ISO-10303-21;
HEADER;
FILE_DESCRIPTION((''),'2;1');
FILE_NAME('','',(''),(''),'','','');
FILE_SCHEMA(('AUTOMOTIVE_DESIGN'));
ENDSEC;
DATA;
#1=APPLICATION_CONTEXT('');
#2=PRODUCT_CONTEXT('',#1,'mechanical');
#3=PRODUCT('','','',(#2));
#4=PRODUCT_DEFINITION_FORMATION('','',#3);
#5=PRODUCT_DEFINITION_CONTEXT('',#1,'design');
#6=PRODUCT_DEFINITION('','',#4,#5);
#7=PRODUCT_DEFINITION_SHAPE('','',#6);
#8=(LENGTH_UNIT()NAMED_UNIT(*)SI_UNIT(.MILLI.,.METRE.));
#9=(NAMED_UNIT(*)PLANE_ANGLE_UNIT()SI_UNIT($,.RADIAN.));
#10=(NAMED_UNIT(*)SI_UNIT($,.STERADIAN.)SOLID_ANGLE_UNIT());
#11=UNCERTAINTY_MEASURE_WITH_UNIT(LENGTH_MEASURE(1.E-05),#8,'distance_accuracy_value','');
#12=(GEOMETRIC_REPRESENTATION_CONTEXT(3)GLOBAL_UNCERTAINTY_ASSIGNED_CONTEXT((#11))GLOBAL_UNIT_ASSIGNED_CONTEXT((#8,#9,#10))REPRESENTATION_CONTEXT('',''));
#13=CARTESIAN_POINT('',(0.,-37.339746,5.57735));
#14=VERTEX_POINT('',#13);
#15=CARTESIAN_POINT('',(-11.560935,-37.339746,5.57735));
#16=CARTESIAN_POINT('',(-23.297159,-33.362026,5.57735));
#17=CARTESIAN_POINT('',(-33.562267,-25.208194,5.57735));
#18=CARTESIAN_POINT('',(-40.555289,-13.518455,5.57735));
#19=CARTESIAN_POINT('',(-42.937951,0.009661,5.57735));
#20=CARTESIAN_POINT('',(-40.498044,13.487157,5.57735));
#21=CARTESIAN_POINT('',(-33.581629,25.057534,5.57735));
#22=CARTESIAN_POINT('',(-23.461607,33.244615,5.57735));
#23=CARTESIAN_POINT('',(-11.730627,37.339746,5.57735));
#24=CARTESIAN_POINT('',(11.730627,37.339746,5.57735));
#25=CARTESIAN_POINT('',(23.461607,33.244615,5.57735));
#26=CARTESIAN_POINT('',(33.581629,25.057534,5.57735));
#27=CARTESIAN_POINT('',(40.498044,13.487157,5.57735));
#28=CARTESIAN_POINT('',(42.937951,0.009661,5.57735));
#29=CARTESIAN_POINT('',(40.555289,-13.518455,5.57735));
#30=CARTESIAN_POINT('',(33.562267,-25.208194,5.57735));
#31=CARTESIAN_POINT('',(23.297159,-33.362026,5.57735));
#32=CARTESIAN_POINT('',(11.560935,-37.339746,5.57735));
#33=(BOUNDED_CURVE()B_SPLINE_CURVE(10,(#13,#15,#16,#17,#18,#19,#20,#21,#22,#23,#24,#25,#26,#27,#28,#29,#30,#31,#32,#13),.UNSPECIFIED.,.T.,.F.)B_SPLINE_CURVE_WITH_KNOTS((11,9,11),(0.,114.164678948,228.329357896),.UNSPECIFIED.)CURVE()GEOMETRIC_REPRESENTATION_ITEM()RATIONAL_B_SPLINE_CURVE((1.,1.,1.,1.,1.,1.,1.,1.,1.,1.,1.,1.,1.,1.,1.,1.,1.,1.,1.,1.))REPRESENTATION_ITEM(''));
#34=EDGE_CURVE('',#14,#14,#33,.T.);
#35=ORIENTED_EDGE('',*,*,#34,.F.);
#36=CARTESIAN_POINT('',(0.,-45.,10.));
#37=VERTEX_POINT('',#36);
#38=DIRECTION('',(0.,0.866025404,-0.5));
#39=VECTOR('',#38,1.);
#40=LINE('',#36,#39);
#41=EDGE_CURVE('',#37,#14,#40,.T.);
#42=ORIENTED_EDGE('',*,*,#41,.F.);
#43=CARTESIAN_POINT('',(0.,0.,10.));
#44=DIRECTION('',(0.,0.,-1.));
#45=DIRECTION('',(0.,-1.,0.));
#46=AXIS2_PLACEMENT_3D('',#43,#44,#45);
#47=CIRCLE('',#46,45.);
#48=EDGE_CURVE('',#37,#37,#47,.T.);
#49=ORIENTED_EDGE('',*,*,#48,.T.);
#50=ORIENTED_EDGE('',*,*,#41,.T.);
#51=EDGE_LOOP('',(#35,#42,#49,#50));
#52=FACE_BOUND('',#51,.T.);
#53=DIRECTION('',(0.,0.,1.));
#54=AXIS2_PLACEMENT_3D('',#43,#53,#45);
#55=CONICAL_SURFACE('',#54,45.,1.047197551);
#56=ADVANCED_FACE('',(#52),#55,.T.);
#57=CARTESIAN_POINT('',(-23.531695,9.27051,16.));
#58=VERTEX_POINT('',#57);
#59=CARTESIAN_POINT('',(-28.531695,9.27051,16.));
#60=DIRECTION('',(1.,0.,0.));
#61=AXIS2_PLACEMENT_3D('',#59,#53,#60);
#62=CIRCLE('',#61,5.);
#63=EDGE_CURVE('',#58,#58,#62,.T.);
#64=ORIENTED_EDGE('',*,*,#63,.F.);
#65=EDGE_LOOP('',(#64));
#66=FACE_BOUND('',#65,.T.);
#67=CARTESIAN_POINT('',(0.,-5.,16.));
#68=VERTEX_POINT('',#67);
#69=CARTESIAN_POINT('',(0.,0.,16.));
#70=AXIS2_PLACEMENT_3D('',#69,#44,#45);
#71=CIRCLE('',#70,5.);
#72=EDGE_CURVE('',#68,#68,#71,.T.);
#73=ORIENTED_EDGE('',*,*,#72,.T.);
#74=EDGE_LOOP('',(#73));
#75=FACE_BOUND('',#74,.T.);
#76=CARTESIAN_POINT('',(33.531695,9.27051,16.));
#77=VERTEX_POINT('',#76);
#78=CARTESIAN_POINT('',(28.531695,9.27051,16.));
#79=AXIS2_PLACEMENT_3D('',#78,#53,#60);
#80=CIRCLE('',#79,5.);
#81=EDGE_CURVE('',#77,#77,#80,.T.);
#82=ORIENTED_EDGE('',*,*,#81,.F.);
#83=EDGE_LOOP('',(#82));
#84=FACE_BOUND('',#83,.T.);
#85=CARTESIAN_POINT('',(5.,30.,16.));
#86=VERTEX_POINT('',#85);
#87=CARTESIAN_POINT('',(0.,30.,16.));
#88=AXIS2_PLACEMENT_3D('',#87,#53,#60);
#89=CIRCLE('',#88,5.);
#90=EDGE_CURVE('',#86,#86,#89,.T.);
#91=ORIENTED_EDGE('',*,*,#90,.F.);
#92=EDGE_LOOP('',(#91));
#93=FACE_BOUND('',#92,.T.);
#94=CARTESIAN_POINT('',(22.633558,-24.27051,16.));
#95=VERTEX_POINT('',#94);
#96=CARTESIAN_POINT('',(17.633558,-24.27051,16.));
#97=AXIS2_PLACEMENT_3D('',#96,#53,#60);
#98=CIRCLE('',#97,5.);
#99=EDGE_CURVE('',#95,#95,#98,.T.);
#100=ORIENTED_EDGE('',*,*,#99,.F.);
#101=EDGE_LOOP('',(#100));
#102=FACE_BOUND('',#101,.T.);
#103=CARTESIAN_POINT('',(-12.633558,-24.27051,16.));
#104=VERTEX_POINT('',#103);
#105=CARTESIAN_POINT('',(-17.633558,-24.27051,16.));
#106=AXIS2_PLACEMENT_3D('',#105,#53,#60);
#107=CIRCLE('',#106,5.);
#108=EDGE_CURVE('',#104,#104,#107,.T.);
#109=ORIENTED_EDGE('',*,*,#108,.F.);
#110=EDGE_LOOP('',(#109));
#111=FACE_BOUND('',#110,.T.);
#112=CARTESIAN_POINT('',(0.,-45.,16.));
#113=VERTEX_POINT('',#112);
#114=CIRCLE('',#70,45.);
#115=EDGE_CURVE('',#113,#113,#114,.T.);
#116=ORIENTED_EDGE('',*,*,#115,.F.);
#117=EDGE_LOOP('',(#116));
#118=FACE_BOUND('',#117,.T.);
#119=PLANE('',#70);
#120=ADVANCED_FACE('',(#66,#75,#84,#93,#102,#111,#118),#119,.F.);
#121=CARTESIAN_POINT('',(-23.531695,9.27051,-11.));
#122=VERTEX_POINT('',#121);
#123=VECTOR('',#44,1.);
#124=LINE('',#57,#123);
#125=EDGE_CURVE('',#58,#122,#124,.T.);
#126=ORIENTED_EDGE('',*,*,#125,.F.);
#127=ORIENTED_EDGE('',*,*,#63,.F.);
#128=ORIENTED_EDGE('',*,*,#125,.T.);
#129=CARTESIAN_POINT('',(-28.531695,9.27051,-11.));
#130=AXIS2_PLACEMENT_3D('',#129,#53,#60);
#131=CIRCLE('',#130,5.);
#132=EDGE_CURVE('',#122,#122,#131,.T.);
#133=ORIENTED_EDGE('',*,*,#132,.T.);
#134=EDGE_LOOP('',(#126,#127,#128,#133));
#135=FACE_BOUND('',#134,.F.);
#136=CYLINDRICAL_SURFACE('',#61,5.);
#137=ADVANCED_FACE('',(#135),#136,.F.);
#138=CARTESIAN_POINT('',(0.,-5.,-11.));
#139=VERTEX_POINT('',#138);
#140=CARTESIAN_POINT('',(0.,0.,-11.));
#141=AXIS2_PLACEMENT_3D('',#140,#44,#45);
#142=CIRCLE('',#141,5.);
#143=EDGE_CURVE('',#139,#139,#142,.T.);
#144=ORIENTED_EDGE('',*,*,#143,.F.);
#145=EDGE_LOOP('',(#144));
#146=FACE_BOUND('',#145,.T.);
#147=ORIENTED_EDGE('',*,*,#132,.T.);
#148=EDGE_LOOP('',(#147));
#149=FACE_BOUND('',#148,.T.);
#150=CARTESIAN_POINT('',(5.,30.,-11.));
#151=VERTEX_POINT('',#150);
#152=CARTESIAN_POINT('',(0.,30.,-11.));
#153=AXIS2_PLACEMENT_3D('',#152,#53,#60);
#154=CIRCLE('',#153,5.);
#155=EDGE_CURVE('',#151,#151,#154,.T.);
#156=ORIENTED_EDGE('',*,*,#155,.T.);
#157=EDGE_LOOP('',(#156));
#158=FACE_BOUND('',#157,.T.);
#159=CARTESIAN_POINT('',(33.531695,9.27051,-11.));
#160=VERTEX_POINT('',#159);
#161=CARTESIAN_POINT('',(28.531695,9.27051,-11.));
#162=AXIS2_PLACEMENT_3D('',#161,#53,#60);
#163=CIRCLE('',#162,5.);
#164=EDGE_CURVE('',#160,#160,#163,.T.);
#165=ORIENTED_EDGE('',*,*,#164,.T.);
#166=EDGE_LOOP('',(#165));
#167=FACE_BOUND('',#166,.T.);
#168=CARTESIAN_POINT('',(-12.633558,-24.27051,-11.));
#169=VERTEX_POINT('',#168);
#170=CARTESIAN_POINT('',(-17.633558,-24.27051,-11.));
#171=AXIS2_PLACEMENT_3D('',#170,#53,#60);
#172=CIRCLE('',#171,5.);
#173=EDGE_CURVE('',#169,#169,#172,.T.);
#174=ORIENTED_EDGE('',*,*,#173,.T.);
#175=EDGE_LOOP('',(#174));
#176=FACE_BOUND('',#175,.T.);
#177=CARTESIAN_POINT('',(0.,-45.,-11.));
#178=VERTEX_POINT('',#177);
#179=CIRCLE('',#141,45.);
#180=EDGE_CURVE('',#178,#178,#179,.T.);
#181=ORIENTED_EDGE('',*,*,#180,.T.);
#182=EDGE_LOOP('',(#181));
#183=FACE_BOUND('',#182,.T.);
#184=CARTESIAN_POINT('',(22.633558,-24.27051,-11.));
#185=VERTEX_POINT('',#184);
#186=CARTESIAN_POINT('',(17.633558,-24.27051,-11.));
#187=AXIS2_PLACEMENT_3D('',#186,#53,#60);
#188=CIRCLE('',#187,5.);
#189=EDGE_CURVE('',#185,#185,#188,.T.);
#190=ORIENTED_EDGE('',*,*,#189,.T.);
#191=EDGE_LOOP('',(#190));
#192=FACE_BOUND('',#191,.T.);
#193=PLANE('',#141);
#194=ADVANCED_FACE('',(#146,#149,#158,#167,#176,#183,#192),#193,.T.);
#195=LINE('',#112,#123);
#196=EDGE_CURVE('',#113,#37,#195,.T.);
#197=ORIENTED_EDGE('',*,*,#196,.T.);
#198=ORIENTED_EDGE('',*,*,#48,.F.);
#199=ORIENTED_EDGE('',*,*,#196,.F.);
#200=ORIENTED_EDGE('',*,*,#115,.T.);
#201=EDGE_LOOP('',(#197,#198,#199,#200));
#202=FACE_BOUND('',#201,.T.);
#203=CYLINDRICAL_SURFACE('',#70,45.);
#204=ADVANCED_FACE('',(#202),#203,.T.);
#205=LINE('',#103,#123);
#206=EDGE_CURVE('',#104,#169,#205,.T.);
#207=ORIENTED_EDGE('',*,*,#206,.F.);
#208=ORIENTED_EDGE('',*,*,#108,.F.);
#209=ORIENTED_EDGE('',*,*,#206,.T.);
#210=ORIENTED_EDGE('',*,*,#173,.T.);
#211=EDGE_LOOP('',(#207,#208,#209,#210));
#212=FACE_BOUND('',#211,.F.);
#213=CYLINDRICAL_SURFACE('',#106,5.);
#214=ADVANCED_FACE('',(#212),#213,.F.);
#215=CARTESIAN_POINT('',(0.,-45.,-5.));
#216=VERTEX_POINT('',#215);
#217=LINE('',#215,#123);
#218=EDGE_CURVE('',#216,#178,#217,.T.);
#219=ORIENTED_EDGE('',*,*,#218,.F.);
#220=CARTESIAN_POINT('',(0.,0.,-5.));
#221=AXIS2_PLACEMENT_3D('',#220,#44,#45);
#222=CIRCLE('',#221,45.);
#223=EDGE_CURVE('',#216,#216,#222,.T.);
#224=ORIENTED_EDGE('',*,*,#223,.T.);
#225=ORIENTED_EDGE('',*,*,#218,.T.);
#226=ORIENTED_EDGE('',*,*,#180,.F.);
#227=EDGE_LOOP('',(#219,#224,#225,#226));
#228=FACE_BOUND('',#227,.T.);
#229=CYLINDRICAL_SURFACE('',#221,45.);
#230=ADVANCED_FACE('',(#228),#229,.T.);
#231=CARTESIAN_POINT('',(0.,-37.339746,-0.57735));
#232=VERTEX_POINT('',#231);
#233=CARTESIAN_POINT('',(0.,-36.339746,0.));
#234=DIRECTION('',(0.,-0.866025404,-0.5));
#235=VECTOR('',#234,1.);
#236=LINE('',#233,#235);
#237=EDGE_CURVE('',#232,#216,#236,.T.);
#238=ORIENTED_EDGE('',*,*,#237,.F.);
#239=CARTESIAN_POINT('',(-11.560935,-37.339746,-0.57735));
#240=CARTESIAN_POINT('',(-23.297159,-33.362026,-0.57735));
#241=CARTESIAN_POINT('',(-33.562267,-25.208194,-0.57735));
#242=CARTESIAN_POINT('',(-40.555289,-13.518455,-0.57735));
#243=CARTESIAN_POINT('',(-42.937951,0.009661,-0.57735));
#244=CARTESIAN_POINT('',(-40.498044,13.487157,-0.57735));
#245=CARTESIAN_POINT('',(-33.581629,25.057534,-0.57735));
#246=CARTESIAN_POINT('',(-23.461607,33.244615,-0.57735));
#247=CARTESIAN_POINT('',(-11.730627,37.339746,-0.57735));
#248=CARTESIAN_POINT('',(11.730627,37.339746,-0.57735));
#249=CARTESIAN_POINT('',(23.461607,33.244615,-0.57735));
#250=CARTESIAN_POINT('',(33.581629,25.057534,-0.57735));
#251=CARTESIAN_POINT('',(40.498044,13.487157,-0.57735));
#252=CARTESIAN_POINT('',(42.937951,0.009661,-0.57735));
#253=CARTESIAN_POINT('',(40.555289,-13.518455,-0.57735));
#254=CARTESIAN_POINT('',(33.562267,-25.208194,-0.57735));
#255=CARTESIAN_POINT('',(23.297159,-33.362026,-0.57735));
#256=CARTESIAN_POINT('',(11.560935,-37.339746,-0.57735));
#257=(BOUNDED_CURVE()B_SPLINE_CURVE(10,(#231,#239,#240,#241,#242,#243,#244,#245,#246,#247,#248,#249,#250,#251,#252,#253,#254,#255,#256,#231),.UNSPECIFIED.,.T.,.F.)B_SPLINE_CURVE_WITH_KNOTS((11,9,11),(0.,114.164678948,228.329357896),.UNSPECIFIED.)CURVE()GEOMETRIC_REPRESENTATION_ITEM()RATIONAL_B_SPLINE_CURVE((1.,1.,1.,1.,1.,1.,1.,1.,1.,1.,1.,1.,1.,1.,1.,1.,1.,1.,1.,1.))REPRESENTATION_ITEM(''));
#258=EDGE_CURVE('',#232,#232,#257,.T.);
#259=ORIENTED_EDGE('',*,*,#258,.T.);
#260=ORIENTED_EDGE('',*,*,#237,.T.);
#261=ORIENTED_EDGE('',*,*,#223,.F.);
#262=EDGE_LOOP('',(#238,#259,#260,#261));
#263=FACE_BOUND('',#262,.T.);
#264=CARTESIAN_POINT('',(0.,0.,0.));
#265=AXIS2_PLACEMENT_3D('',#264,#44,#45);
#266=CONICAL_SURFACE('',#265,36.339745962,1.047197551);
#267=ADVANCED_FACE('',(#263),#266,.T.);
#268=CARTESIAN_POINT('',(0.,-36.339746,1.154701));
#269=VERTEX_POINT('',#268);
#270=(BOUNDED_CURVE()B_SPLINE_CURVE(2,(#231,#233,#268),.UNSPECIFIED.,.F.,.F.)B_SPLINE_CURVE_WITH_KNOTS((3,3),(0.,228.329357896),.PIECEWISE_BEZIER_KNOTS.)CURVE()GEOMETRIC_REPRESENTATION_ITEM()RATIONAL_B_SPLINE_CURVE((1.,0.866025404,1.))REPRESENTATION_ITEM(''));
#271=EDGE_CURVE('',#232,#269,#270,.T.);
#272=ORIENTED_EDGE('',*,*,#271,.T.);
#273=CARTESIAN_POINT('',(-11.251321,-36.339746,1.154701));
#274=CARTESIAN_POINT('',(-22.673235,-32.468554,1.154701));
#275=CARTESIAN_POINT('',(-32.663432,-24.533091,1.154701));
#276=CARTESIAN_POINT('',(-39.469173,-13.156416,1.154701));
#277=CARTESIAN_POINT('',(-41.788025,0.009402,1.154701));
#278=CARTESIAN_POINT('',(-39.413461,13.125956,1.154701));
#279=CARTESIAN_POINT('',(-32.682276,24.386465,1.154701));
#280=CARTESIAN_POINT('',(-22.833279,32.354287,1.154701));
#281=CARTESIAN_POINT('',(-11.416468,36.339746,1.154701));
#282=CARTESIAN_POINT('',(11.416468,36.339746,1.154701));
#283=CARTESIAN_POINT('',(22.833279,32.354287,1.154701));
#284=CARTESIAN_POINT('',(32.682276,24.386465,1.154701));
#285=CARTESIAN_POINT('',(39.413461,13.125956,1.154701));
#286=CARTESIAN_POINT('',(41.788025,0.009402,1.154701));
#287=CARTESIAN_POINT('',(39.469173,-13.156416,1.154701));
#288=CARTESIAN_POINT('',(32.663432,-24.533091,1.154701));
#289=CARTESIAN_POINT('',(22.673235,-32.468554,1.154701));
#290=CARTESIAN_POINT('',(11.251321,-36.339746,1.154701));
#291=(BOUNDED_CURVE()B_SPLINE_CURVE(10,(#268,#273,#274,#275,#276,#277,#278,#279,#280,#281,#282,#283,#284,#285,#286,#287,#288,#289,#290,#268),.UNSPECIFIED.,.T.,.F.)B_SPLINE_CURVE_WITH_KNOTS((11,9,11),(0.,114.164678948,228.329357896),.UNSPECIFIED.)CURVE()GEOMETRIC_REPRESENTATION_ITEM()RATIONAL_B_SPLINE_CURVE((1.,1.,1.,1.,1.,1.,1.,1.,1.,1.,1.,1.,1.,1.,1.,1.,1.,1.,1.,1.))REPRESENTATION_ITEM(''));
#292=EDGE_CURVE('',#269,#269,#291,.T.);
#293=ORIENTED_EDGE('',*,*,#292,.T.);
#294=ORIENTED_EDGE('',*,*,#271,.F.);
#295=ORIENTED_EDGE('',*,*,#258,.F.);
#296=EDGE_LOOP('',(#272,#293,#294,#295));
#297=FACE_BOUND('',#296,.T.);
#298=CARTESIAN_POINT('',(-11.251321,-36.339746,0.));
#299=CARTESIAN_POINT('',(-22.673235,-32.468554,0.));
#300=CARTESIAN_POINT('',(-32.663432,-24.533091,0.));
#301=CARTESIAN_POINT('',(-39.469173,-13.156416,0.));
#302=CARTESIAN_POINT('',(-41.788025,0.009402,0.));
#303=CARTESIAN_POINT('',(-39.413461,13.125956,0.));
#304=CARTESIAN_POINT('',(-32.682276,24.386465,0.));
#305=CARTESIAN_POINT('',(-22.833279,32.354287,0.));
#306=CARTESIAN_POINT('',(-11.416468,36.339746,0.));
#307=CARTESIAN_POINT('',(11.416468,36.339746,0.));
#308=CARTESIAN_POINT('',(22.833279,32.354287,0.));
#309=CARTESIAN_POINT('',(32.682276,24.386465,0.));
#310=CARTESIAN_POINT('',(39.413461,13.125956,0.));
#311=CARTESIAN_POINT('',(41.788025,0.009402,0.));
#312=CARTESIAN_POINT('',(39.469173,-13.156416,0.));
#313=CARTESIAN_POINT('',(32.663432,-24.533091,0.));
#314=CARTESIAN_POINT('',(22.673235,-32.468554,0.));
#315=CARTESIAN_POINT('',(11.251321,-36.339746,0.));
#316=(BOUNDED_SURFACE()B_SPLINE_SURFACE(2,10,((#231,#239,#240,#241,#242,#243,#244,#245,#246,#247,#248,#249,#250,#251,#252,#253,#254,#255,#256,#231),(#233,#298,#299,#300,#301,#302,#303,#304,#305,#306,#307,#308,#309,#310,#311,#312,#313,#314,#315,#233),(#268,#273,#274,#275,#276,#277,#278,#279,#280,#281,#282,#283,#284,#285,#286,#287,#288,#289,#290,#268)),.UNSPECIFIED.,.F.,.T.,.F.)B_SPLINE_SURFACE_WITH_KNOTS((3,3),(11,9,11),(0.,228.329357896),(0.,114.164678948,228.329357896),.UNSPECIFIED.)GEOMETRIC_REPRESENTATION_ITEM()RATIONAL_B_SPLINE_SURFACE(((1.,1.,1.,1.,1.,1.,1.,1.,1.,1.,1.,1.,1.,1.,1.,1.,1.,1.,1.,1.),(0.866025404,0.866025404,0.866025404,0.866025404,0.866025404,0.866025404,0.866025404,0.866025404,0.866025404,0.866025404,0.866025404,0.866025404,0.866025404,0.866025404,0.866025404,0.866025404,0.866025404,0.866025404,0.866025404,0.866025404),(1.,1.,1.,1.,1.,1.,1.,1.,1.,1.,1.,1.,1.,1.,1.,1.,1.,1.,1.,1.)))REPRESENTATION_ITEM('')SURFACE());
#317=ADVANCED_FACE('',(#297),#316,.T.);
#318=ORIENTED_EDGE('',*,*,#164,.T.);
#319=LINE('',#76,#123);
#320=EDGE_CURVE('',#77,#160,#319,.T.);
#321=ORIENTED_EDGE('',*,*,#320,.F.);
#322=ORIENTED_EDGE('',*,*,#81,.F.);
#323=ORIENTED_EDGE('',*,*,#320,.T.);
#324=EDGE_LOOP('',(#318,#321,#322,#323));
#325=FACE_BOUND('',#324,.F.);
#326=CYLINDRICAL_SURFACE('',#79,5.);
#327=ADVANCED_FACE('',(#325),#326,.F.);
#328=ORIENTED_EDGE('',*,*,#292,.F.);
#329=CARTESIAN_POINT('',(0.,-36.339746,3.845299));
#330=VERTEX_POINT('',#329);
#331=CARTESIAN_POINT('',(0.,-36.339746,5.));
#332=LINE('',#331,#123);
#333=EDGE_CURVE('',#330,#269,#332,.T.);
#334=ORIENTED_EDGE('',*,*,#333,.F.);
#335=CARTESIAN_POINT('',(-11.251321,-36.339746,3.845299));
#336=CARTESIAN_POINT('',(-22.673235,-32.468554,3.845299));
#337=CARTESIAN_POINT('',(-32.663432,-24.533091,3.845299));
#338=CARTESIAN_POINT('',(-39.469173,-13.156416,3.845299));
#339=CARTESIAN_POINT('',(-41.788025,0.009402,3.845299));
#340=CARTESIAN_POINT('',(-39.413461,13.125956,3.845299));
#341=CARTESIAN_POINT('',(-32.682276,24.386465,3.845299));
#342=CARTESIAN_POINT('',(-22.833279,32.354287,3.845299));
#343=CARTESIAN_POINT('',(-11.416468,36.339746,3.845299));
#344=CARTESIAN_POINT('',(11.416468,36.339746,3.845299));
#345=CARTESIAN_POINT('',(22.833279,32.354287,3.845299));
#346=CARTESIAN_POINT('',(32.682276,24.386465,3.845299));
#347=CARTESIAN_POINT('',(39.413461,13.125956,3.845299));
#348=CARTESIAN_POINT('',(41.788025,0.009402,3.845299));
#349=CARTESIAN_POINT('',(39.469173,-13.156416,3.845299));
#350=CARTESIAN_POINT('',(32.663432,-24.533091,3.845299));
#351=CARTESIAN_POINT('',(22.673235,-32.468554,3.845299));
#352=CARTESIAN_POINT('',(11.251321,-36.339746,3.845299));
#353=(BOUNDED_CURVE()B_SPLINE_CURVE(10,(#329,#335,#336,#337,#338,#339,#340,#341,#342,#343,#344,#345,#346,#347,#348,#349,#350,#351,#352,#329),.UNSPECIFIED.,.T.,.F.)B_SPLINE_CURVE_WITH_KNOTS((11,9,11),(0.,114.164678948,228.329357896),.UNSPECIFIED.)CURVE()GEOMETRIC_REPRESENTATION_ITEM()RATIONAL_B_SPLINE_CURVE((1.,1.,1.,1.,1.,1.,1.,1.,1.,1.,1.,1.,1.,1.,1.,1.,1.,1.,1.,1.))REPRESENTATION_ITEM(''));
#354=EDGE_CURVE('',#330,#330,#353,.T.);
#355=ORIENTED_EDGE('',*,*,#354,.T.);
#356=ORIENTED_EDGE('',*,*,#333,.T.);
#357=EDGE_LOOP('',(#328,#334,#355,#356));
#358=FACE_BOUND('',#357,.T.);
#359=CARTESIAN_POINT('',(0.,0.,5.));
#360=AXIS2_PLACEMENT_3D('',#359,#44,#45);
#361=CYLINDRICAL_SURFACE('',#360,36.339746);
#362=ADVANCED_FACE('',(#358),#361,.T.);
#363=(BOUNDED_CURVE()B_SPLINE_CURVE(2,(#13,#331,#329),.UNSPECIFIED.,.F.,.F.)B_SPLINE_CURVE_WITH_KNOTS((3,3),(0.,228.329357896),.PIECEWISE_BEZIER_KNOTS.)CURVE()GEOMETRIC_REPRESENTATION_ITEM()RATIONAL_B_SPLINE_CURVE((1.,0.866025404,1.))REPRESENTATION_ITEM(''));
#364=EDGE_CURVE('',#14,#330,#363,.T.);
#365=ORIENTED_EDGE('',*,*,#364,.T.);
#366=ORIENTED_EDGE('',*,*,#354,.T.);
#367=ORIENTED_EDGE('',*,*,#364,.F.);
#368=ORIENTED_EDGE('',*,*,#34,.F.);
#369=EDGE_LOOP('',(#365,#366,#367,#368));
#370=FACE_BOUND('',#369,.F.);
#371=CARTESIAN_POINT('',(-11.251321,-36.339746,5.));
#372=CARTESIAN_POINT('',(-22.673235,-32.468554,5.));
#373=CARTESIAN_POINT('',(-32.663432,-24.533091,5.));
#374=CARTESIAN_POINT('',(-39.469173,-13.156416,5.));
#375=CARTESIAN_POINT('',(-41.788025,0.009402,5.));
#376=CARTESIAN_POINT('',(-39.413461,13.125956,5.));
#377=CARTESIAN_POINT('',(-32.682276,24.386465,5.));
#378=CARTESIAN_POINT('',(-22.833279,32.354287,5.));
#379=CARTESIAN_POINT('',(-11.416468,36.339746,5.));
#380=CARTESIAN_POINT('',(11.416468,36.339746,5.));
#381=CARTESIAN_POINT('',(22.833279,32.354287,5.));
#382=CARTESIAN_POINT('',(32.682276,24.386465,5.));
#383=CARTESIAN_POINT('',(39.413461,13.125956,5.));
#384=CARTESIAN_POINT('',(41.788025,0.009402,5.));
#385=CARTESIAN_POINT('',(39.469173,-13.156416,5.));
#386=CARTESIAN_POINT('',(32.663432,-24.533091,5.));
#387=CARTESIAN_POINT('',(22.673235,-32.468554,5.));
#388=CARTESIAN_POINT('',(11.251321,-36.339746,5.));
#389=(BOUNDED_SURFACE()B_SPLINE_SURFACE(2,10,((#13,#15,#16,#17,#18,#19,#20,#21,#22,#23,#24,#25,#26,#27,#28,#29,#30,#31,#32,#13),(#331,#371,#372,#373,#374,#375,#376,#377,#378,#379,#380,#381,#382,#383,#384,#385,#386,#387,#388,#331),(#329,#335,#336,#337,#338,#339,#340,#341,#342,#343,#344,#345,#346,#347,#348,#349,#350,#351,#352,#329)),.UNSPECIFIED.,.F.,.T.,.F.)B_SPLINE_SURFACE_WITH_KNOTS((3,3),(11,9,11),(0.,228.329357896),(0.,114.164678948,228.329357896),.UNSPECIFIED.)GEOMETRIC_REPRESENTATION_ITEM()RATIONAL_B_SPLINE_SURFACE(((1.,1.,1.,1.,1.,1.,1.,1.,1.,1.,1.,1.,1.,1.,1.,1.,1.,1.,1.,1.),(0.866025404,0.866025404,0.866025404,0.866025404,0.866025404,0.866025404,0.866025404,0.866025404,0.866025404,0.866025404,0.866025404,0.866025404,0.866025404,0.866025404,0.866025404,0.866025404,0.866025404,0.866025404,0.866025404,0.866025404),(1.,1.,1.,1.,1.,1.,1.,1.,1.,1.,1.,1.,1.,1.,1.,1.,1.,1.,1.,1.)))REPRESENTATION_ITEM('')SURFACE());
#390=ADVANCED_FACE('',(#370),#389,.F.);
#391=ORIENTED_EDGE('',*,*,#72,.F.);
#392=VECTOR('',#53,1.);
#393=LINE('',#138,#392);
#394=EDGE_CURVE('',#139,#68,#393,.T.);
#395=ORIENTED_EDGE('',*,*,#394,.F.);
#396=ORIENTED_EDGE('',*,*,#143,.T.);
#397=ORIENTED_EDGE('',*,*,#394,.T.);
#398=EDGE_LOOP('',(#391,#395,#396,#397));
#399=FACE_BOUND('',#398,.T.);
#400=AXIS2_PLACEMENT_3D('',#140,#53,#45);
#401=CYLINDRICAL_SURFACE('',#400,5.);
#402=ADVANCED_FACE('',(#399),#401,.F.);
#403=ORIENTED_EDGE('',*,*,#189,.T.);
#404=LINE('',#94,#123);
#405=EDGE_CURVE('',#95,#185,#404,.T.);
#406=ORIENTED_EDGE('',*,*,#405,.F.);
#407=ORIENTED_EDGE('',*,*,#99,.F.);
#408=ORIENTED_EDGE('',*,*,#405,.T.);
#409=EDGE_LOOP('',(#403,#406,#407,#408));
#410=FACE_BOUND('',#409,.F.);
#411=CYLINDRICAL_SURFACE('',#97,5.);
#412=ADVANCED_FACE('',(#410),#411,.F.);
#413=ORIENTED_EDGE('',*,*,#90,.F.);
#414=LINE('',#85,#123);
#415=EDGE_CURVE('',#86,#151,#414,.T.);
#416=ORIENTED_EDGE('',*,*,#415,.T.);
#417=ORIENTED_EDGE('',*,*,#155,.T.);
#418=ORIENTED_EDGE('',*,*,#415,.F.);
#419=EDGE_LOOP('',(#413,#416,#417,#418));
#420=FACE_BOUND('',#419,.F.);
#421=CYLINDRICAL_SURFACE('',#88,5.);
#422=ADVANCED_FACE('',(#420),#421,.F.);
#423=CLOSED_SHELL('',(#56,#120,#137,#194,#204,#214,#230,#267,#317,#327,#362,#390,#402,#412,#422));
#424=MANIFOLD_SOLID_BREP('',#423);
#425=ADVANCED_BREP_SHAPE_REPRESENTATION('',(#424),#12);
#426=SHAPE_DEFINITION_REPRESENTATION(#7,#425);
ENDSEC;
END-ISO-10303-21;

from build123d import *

# Parameters (mm, degrees)
F2_R     = 5
F3_DEPTH = 27
F4_R     = 2


# Not quite as in the source:
# - a feature names something its author has since deleted; it is built from what else it names


with BuildPart() as f1:
    # F0 (on Right) → F1 (revolve)
    with BuildSketch(Plane.YZ):
        Polygon((-5, -11), (-5, 16), (-45, 16), (-45, 10), (-36.3397459622, 5), (-36.3397459622, 0), (-45, -5), (-45, -11), align=None)
    revolve(axis=Axis((0, 0, -0.4931497392), (0, 0, -1)))

    # F2 (on face) → F3 (cut, through all)
    with BuildSketch(Plane.XY.offset(16)):
        with Locations((-28.5316954889, 9.2705098312)):
            Circle(F2_R)
        with Locations((-17.6335575688, -24.2705098312)):
            Circle(F2_R)
        with Locations((17.6335575688, -24.2705098312)):
            Circle(F2_R)
        with Locations((28.5316954889, 9.2705098312)):
            Circle(F2_R)
        with Locations((0, 30)):
            Circle(F2_R)
    extrude(amount=-F3_DEPTH, mode=Mode.SUBTRACT)

    # F4
    f4_edges = [f1.edges().sort_by_distance(p)[0] for p in [
        (0, 36.339746, 0),
        (0, 36.339746, 5),
    ]]
    fillet(f4_edges, radius=F4_R)


solid = f1.part
